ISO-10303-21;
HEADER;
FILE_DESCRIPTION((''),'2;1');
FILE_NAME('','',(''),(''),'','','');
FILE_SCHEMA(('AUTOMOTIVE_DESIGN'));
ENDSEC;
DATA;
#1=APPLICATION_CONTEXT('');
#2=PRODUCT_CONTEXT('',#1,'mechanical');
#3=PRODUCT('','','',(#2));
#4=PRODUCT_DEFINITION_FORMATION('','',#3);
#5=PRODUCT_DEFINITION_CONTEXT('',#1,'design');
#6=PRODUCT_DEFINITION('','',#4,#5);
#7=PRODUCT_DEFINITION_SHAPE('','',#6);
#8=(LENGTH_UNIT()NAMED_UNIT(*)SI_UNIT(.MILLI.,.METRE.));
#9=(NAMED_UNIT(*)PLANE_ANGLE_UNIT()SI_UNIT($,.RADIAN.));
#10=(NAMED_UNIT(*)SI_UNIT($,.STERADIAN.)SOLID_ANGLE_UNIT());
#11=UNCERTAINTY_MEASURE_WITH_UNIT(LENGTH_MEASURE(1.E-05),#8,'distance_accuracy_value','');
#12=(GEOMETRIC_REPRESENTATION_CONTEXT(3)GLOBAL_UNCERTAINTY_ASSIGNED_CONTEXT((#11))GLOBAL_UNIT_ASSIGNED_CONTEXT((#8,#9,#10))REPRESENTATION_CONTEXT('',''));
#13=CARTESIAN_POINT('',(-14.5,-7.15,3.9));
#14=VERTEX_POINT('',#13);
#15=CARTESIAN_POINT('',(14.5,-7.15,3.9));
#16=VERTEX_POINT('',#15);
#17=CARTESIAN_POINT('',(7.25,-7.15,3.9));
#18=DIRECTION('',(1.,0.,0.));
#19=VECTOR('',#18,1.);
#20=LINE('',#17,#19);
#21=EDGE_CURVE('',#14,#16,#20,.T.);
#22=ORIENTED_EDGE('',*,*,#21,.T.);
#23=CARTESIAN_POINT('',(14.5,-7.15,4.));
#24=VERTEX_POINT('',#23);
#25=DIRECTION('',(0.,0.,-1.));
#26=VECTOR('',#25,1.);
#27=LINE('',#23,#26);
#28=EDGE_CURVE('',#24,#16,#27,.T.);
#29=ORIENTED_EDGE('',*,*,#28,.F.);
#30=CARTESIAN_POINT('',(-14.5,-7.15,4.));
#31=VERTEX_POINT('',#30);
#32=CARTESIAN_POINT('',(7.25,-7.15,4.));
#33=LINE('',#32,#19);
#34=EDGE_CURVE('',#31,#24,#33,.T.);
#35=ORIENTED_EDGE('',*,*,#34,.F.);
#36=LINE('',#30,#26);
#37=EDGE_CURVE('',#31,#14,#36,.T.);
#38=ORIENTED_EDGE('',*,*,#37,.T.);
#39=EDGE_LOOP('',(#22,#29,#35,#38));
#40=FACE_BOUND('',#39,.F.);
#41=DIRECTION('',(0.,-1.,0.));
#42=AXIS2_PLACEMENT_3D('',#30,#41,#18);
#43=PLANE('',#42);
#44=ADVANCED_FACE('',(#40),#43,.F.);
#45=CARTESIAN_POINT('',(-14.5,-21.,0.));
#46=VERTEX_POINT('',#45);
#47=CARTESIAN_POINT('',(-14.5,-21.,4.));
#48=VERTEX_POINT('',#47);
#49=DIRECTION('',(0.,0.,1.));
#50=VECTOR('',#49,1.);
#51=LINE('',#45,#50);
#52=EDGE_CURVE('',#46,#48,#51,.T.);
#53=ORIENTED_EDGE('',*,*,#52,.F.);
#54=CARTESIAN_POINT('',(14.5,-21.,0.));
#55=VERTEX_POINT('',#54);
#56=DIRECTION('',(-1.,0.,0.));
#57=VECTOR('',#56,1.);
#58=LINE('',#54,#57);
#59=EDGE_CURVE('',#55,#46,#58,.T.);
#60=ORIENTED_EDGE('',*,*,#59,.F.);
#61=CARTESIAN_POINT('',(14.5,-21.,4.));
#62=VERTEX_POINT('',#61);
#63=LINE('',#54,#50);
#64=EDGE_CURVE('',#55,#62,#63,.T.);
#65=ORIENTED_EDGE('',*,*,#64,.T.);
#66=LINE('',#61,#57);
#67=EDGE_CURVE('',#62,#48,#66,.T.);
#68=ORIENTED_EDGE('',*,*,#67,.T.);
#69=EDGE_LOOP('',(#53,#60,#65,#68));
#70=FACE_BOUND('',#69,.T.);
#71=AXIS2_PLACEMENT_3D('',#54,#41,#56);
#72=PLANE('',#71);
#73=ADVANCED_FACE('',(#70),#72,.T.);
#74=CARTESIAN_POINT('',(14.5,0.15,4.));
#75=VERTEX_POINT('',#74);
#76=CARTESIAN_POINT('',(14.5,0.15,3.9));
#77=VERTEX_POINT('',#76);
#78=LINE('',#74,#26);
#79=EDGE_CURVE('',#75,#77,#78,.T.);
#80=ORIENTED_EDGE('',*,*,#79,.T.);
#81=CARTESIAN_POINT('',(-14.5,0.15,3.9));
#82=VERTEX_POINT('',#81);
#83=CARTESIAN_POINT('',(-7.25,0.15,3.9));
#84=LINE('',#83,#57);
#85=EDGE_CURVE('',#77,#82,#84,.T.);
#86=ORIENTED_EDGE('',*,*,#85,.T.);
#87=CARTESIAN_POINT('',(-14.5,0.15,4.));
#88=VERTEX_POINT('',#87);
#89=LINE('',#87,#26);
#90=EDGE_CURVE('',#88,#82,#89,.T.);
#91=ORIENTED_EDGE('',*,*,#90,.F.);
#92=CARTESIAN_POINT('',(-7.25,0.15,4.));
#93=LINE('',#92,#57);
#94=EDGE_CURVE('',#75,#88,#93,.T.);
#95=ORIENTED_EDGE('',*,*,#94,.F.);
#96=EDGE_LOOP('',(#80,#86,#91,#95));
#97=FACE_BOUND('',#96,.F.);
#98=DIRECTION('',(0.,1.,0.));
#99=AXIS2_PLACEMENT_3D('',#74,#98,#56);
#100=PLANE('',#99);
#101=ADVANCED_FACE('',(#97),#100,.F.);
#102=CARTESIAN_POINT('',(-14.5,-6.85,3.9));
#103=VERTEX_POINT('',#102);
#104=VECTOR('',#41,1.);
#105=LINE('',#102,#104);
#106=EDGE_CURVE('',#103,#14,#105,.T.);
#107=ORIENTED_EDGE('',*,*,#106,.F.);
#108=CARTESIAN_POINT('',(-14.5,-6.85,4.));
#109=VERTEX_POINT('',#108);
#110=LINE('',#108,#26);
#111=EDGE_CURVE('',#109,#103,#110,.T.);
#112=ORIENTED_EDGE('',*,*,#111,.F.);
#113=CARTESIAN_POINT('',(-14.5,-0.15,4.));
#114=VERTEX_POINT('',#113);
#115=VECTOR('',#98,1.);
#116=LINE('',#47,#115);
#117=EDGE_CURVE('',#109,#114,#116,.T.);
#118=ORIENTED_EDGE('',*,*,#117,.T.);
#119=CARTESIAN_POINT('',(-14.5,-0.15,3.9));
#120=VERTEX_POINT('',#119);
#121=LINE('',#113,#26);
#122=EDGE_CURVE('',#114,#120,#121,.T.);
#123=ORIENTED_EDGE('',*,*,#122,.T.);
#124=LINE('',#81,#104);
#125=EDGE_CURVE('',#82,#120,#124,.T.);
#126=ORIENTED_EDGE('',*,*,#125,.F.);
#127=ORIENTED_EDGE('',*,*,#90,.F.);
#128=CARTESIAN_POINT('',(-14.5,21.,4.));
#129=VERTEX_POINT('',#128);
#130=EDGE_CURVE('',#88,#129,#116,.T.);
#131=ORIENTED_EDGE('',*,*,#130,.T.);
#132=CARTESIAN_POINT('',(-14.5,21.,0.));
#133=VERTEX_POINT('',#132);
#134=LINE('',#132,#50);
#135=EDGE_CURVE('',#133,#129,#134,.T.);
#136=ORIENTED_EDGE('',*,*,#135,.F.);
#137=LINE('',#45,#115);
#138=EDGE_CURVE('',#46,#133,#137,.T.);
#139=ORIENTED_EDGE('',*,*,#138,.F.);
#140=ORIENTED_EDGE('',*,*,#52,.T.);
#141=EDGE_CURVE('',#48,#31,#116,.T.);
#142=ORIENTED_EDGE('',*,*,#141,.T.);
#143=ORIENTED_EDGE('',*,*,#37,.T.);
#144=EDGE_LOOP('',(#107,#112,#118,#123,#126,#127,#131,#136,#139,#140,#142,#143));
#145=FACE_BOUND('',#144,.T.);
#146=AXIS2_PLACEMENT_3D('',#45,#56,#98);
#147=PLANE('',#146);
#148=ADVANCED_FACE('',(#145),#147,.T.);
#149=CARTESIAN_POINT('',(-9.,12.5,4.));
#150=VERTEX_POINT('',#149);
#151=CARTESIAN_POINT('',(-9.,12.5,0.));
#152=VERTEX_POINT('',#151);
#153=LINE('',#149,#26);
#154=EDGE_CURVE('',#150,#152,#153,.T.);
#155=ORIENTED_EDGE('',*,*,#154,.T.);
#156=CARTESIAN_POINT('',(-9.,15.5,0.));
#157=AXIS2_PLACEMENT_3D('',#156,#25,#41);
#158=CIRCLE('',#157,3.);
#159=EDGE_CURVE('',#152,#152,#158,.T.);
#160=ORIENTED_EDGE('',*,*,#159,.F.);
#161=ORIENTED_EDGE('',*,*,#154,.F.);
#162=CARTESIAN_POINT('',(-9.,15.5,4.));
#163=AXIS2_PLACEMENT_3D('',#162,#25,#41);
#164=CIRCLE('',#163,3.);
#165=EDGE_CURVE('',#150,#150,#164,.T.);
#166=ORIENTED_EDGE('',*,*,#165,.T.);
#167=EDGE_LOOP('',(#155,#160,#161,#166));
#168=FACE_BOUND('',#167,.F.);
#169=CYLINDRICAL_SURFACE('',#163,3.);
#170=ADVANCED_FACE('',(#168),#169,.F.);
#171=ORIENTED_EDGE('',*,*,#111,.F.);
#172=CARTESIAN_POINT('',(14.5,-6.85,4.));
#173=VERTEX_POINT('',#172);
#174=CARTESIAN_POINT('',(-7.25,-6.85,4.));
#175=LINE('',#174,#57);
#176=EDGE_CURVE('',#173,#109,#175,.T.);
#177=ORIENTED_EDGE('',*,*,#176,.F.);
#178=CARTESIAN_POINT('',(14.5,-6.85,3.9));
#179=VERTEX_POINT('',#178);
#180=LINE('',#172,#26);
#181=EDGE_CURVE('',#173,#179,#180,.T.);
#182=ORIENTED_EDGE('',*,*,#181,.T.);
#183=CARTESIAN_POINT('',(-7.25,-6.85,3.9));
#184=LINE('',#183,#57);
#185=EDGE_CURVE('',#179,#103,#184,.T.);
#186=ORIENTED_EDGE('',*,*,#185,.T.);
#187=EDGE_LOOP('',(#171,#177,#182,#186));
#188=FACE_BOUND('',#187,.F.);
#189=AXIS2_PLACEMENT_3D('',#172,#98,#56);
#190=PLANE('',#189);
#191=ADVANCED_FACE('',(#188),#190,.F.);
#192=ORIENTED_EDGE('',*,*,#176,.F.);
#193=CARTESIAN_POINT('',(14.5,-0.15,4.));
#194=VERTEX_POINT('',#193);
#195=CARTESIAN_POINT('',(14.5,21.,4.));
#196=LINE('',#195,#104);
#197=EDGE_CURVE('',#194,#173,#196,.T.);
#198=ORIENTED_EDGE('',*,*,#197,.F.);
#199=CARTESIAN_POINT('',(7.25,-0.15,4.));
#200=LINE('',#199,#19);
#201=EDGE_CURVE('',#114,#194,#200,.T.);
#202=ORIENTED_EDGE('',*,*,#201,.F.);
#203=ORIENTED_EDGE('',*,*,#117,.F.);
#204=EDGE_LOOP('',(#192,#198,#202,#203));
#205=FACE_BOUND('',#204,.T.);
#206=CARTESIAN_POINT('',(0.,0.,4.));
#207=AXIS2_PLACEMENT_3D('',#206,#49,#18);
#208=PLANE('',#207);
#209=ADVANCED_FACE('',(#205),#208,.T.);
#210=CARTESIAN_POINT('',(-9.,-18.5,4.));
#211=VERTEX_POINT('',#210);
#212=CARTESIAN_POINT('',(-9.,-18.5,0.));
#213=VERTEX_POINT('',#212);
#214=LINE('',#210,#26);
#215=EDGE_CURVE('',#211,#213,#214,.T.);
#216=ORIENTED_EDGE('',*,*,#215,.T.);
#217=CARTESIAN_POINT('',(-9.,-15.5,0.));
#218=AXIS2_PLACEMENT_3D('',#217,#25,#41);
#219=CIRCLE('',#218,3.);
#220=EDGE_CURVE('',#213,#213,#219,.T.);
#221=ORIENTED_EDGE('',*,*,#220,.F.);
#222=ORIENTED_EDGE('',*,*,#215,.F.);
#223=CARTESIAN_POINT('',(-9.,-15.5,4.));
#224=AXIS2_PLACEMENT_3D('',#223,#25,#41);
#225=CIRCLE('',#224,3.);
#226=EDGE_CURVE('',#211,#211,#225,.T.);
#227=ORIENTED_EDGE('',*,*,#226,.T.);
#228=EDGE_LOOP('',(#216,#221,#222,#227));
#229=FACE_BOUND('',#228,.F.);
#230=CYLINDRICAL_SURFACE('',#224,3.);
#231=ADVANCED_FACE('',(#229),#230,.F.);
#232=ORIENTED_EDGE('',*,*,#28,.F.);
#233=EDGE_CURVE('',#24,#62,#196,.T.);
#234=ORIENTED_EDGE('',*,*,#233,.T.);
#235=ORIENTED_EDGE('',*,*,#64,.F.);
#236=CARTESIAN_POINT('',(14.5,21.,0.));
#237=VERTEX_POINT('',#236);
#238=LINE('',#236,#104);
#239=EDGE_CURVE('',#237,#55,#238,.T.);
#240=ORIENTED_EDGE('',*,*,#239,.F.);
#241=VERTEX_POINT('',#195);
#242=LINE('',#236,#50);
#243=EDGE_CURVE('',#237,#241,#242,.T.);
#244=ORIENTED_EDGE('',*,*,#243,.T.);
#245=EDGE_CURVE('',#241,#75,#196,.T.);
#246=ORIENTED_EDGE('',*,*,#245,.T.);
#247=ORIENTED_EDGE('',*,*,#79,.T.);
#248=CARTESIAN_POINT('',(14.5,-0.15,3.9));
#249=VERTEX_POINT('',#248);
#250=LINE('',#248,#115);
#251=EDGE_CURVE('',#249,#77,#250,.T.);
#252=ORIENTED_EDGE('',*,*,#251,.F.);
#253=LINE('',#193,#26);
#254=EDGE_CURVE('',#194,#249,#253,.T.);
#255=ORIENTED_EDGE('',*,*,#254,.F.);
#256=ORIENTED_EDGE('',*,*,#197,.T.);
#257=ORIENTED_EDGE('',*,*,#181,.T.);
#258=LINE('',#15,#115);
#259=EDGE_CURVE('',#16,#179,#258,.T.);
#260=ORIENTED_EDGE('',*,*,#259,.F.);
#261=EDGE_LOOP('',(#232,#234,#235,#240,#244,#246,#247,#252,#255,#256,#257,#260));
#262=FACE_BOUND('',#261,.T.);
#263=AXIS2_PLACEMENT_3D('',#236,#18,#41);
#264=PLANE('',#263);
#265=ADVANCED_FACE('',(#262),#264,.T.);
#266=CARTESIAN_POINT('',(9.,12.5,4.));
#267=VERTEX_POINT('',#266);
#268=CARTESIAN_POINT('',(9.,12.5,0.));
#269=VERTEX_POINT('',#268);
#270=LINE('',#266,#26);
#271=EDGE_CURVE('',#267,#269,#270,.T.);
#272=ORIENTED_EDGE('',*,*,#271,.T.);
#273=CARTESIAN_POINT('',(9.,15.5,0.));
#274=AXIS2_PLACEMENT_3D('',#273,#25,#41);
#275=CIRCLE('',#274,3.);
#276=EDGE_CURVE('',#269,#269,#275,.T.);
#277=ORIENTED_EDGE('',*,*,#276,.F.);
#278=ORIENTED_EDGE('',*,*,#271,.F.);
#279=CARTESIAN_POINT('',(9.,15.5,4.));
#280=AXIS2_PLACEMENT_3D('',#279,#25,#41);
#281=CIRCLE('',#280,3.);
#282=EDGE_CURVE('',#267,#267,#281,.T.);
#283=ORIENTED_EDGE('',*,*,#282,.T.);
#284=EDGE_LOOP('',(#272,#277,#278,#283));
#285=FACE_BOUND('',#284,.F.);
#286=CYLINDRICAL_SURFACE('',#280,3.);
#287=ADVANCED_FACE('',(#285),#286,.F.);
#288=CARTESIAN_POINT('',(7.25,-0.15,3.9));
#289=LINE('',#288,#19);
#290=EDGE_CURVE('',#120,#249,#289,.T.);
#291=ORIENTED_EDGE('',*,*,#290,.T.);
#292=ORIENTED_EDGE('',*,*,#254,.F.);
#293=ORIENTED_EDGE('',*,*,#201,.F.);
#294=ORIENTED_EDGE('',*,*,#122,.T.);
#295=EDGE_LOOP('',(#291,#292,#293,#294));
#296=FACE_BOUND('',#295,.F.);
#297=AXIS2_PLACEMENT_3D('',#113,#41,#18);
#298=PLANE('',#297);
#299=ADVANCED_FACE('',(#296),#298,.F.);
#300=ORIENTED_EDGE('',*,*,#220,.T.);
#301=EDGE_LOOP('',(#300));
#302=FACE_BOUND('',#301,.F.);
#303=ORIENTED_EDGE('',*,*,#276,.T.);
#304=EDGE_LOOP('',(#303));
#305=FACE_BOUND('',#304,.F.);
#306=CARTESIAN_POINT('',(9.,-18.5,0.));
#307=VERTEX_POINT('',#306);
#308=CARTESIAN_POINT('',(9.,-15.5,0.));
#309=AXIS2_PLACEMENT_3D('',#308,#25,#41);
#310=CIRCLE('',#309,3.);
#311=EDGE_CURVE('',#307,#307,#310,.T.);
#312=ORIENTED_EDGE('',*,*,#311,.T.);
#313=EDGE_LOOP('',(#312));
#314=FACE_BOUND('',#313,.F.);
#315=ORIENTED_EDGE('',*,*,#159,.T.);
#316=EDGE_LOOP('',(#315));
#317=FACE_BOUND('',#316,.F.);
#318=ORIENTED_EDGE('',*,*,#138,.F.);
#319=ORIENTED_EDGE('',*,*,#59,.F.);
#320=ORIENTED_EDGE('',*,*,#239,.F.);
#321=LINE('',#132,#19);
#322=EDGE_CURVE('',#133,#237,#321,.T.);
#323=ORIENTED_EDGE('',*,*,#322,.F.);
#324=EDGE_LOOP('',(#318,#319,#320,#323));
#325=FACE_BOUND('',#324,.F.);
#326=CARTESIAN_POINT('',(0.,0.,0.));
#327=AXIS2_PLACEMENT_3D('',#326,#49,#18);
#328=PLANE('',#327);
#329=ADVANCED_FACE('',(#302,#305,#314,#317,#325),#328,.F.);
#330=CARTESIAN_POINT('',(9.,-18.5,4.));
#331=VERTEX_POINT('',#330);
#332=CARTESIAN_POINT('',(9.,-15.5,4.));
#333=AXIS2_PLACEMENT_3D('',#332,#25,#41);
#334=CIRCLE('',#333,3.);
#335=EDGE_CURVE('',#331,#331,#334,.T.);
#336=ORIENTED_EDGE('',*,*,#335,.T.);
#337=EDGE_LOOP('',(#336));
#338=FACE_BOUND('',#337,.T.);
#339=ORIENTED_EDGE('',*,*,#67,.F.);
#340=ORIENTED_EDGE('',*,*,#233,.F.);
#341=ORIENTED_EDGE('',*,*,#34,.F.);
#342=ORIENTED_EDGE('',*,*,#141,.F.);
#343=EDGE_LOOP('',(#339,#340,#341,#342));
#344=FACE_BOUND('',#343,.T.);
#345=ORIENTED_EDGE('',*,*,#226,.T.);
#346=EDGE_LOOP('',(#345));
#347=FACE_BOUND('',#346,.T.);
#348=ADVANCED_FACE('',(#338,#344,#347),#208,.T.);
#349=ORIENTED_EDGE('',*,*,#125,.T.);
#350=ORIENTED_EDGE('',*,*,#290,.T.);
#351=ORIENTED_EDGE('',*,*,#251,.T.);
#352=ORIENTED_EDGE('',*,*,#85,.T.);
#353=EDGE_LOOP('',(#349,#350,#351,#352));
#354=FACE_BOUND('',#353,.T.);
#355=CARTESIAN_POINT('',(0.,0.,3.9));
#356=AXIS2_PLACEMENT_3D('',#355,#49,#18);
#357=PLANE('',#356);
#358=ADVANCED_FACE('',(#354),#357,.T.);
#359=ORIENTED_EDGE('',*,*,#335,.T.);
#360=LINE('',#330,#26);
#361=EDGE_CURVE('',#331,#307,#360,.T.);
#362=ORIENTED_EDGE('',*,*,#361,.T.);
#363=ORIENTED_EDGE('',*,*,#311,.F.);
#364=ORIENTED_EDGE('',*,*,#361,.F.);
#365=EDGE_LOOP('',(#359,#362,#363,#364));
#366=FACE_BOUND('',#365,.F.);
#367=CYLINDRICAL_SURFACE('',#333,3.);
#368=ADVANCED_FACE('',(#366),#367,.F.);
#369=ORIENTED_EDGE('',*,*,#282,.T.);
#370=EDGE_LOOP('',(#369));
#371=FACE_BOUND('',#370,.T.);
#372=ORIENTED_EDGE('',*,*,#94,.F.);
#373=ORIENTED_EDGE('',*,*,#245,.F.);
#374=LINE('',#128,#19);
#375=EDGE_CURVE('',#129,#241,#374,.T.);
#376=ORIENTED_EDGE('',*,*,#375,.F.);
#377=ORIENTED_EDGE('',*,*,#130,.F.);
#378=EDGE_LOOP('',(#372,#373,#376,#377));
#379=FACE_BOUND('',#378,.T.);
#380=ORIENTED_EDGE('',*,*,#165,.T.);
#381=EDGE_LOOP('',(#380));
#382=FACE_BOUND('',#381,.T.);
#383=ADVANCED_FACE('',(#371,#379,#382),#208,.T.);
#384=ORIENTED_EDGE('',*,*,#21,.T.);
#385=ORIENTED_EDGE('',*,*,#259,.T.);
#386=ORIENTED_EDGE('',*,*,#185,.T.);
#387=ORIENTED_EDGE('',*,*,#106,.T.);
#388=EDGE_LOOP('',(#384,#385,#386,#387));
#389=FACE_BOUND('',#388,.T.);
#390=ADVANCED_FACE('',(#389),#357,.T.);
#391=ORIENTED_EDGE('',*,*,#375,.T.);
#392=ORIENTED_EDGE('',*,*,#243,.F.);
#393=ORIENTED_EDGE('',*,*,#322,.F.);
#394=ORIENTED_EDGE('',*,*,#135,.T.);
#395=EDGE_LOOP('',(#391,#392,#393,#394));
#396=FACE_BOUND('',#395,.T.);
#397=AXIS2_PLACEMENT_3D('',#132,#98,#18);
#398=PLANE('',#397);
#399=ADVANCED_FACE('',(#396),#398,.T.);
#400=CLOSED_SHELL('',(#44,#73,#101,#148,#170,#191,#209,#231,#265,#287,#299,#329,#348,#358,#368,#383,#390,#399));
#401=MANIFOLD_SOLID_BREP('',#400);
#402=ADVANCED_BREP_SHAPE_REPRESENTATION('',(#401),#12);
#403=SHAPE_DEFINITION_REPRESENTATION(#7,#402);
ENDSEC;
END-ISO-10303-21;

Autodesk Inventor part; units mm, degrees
ref_plane "YZ Plane" through (0, 0, 0) normal (1, 0, 0) x (0, 1, 0)
ref_plane "XZ Plane" through (0, 0, 0) normal (0, 1, 0) x (-1, 0, 0)
ref_plane "XY Plane" through (0, 0, 0) normal (0, 0, 1) x (1, 0, 0)
sketch "草圖1" plane through (0, 0, 0) normal (0, 0, 1) x (1, 0, 0)
  line L0 (14.5, -21) -> (-14.5, -21)
  line L1 (-14.5, -21) -> (-14.5, 21)
  line L2 (-14.5, 21) -> (14.5, 21)
  line L3 (14.5, 21) -> (14.5, -21)
  line L4 (14.5, 21) -> (-14.5, -21) construction
  point P0 (0, 0)
  dimension "d0" = 29
  dimension "d1" = 42
extrude "擠出1" add sketch "草圖1" along normal blind 4
sketch "草圖2" plane through (0, 0, 4) normal (0, 0, 1) x (1, 0, 0)
  line L0 (9, -15.5) -> (-9, -15.5)
  line L1 (-9, -15.5) -> (-9, 15.5)
  line L2 (-9, 15.5) -> (9, 15.5)
  line L3 (9, 15.5) -> (9, -15.5)
  line L4 (9, 15.5) -> (-9, -15.5) construction
  point P0 (0, 0)
  dimension "d4" = 31
  dimension "d5" = 18
hole "孔1" at (-9, 15.5, 4) at (9, 15.5, 4) at (9, -15.5, 4) at (-9, -15.5, 4) direction (0, 0, -1) diameter 6 end through all
sketch "草圖3" plane through (0, 0, 4) normal (0, 0, 1) x (1, 0, 0)
  line L0 (-14.5, -21) -> (-14.5, 21) projected
  line L1 (14.5, -21) -> (-14.5, -21) projected
  line L2 (14.5, 21) -> (14.5, -21) projected
  line L3 (-14.5, -6.85) -> (14.5, -6.85)
  line L4 (14.5, -6.85) -> (14.5, -7.15)
  line L5 (14.5, -7.15) -> (-14.5, -7.15)
  line L6 (-14.5, -7.15) -> (-14.5, -6.85)
  line L7 (-14.5, 0.15) -> (14.5, 0.15)
  line L8 (14.5, 0.15) -> (14.5, -0.15)
  line L9 (14.5, -0.15) -> (-14.5, -0.15)
  line L10 (-14.5, -0.15) -> (-14.5, 0.15)
  line L11 (-14.5, -7) -> (14.5, -7)
  line L12 (-14.5, 0) -> (14.5, 0)
  point P0 (0, 0)
  dimension "d13" = 0.3
  dimension "d14" = 0.3
  dimension "d15" = 14
  dimension "d16" = 21
emboss "浮雕1" sketch "草圖3" operation cut depth 0.1 direction (0, 0, -1) contours L0 L11 L2 L5 | L0 L3 L2 L11 | L0 L12 L2 L9 | L0 L7 L2 L12
properties part number "EBARA A Type 馬達側油視窗" material "PMMA 塑膠"
